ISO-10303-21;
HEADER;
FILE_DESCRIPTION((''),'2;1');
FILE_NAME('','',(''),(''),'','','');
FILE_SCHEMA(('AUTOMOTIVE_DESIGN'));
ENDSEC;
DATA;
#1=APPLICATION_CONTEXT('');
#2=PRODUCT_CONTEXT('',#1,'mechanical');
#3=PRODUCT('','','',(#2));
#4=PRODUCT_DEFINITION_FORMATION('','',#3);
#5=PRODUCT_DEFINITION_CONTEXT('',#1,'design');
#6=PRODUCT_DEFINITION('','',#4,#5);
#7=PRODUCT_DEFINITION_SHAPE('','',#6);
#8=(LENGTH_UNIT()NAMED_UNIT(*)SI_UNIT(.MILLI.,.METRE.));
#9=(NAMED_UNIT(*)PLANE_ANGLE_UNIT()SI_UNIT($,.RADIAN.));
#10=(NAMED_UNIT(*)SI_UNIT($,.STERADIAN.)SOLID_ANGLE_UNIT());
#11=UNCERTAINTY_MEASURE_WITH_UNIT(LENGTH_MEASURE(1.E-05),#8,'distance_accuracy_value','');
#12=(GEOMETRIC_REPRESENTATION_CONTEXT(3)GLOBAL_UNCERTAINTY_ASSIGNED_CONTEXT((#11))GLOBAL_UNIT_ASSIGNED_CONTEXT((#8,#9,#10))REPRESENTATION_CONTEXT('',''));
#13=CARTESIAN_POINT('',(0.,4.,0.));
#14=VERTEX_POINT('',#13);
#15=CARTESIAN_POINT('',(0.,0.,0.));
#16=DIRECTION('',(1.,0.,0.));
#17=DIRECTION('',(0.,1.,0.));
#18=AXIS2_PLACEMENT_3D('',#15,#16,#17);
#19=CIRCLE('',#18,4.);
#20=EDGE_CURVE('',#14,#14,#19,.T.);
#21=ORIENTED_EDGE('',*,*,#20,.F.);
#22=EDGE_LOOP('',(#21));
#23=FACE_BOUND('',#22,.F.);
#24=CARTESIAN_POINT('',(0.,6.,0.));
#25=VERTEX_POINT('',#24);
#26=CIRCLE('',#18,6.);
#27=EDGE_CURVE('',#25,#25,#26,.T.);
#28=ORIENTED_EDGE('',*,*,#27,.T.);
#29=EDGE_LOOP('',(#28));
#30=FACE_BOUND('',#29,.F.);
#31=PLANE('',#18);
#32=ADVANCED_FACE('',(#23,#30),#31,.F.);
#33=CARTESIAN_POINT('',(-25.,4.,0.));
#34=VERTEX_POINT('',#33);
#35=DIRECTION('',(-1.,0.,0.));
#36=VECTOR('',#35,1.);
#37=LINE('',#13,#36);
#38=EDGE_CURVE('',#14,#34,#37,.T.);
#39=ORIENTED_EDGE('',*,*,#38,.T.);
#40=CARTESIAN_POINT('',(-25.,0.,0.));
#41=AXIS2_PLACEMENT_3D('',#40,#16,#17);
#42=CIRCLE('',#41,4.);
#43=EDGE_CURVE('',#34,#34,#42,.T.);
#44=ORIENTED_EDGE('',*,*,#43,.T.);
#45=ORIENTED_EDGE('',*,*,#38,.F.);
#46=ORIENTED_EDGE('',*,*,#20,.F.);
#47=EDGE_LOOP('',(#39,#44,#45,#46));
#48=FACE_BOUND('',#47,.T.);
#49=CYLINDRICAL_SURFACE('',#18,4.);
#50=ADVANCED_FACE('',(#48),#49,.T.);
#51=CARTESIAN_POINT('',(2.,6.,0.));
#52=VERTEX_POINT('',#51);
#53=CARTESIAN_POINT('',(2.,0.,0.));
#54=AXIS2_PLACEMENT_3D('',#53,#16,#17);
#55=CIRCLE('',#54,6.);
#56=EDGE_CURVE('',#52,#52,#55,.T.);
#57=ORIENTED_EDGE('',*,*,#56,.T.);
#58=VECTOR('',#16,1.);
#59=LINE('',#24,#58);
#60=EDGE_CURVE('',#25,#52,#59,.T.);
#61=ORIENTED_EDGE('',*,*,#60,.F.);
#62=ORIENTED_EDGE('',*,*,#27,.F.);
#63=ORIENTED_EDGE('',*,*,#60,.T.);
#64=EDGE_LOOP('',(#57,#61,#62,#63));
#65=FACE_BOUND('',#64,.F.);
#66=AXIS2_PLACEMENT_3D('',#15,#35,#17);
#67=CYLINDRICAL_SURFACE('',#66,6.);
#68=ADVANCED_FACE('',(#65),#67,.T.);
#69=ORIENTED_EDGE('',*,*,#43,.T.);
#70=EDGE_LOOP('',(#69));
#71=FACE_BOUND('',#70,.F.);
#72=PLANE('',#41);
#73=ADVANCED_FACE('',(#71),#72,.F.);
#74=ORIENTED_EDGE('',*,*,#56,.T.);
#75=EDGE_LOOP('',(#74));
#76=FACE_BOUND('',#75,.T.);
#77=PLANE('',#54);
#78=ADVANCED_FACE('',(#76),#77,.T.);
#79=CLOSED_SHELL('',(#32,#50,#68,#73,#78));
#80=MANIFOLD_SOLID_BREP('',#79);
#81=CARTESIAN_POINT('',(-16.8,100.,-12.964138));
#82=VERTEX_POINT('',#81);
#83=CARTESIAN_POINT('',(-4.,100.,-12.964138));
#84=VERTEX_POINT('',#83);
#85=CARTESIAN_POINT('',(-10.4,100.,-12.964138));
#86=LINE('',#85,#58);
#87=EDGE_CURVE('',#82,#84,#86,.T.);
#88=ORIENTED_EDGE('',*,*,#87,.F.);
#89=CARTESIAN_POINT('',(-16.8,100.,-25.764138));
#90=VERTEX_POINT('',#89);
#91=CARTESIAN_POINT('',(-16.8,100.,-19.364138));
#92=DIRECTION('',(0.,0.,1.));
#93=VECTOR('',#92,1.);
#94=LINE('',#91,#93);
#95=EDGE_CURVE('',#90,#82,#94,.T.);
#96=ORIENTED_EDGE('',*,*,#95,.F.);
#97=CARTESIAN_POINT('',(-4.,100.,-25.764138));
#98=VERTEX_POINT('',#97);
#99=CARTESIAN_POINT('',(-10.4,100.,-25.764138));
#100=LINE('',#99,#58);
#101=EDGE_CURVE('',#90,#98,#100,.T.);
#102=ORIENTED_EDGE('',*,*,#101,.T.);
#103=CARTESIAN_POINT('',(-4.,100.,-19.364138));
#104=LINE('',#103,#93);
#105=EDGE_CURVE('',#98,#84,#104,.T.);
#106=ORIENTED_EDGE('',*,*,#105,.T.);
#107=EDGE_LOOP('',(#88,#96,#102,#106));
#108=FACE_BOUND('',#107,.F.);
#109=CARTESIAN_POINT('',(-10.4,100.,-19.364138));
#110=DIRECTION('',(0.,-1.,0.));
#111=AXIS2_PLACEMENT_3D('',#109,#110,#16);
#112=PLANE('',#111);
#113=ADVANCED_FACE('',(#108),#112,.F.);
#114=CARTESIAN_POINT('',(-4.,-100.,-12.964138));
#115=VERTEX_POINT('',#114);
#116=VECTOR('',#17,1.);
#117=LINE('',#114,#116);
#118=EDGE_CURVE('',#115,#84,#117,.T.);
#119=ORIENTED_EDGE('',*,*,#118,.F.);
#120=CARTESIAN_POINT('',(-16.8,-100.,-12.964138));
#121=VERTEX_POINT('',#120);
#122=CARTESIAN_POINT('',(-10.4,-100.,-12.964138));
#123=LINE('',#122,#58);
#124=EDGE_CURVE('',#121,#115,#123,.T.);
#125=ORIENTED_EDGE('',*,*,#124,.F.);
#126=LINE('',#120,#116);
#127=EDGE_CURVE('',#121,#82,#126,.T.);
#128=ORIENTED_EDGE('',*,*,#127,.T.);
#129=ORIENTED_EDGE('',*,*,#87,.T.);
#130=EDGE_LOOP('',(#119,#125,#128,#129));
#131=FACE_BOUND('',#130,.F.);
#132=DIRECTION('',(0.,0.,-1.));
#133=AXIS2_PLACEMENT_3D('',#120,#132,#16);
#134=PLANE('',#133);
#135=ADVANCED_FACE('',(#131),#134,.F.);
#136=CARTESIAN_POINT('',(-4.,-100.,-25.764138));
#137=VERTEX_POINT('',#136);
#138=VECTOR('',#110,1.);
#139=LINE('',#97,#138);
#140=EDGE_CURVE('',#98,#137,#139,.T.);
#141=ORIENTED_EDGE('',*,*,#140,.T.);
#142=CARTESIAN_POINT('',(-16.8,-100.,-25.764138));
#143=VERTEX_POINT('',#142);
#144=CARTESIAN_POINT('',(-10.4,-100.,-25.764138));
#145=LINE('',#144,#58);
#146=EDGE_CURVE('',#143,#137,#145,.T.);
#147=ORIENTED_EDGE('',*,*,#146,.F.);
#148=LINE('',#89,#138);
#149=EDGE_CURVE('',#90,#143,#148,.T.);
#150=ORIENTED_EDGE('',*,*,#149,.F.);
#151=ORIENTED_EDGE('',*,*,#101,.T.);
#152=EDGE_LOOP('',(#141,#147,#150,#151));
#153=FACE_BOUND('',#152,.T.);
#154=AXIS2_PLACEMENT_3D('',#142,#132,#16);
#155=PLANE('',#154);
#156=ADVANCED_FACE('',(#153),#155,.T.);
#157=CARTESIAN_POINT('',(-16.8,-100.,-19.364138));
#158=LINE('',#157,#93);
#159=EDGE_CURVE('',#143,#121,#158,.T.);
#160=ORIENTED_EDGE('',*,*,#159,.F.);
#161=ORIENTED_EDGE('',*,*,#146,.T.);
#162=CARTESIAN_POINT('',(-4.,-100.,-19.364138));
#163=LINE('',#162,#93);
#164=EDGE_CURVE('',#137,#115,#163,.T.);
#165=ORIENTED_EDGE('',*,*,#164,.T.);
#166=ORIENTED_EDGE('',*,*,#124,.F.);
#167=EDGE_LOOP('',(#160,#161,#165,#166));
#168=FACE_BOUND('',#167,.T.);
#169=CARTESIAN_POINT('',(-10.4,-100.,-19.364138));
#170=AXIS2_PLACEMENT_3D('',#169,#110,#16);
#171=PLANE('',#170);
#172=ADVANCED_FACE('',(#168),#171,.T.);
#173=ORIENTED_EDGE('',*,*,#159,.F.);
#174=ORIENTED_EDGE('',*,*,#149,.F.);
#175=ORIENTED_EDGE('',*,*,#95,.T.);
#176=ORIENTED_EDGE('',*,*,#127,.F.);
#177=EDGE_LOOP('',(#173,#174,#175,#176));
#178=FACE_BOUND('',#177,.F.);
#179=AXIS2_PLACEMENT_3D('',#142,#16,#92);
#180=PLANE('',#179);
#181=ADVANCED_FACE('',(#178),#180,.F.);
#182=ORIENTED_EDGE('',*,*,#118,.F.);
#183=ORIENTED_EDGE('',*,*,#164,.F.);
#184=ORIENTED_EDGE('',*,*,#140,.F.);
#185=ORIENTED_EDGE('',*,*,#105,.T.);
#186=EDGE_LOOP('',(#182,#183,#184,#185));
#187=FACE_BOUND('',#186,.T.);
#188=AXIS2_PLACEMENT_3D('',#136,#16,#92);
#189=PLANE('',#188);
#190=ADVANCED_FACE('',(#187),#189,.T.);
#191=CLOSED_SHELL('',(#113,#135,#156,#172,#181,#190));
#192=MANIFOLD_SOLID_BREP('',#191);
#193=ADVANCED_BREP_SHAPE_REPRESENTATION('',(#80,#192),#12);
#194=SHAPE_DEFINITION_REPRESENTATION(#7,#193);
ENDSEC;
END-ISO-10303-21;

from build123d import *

# Parameters (mm, degrees)
F0_R      = 6
F1_DEPTH  = 2
F2_R      = 4
F3_DEPTH  = 25
F9_W      = 12.8
F9_H      = 12.8
F10_DEPTH = 100
F11_DEPTH = 200


# Not quite as in the source:
# - the program builds the solid bodies; features that only make, move or delete a surface that nothing else refers to are left out


with BuildPart() as f1:
    # F0 (on Right) → F1 (new body)
    with BuildSketch(Plane.YZ):
        Circle(F0_R)
    extrude(amount=F1_DEPTH)

    # F2 (on Right) → F3 (join)
    with BuildSketch(Plane.YZ):
        Circle(F2_R)
    extrude(amount=-F3_DEPTH)


with BuildPart() as f10:
    # F9 (on Front) → F10 (new body)
    with BuildSketch(Plane.XZ):
        with Locations((-10.4, -19.3641381563)):
            Rectangle(F9_W, F9_H)
    extrude(amount=F10_DEPTH)

    # F11 (add): a face of the model
    f11_faces = [f10.faces().sort_by_distance(p)[0] for p in [
        (-10.4, -100, -19.3641381563),
    ]]
    extrude(f11_faces, amount=-F11_DEPTH)


solid = Compound([f1.part, f10.part])
